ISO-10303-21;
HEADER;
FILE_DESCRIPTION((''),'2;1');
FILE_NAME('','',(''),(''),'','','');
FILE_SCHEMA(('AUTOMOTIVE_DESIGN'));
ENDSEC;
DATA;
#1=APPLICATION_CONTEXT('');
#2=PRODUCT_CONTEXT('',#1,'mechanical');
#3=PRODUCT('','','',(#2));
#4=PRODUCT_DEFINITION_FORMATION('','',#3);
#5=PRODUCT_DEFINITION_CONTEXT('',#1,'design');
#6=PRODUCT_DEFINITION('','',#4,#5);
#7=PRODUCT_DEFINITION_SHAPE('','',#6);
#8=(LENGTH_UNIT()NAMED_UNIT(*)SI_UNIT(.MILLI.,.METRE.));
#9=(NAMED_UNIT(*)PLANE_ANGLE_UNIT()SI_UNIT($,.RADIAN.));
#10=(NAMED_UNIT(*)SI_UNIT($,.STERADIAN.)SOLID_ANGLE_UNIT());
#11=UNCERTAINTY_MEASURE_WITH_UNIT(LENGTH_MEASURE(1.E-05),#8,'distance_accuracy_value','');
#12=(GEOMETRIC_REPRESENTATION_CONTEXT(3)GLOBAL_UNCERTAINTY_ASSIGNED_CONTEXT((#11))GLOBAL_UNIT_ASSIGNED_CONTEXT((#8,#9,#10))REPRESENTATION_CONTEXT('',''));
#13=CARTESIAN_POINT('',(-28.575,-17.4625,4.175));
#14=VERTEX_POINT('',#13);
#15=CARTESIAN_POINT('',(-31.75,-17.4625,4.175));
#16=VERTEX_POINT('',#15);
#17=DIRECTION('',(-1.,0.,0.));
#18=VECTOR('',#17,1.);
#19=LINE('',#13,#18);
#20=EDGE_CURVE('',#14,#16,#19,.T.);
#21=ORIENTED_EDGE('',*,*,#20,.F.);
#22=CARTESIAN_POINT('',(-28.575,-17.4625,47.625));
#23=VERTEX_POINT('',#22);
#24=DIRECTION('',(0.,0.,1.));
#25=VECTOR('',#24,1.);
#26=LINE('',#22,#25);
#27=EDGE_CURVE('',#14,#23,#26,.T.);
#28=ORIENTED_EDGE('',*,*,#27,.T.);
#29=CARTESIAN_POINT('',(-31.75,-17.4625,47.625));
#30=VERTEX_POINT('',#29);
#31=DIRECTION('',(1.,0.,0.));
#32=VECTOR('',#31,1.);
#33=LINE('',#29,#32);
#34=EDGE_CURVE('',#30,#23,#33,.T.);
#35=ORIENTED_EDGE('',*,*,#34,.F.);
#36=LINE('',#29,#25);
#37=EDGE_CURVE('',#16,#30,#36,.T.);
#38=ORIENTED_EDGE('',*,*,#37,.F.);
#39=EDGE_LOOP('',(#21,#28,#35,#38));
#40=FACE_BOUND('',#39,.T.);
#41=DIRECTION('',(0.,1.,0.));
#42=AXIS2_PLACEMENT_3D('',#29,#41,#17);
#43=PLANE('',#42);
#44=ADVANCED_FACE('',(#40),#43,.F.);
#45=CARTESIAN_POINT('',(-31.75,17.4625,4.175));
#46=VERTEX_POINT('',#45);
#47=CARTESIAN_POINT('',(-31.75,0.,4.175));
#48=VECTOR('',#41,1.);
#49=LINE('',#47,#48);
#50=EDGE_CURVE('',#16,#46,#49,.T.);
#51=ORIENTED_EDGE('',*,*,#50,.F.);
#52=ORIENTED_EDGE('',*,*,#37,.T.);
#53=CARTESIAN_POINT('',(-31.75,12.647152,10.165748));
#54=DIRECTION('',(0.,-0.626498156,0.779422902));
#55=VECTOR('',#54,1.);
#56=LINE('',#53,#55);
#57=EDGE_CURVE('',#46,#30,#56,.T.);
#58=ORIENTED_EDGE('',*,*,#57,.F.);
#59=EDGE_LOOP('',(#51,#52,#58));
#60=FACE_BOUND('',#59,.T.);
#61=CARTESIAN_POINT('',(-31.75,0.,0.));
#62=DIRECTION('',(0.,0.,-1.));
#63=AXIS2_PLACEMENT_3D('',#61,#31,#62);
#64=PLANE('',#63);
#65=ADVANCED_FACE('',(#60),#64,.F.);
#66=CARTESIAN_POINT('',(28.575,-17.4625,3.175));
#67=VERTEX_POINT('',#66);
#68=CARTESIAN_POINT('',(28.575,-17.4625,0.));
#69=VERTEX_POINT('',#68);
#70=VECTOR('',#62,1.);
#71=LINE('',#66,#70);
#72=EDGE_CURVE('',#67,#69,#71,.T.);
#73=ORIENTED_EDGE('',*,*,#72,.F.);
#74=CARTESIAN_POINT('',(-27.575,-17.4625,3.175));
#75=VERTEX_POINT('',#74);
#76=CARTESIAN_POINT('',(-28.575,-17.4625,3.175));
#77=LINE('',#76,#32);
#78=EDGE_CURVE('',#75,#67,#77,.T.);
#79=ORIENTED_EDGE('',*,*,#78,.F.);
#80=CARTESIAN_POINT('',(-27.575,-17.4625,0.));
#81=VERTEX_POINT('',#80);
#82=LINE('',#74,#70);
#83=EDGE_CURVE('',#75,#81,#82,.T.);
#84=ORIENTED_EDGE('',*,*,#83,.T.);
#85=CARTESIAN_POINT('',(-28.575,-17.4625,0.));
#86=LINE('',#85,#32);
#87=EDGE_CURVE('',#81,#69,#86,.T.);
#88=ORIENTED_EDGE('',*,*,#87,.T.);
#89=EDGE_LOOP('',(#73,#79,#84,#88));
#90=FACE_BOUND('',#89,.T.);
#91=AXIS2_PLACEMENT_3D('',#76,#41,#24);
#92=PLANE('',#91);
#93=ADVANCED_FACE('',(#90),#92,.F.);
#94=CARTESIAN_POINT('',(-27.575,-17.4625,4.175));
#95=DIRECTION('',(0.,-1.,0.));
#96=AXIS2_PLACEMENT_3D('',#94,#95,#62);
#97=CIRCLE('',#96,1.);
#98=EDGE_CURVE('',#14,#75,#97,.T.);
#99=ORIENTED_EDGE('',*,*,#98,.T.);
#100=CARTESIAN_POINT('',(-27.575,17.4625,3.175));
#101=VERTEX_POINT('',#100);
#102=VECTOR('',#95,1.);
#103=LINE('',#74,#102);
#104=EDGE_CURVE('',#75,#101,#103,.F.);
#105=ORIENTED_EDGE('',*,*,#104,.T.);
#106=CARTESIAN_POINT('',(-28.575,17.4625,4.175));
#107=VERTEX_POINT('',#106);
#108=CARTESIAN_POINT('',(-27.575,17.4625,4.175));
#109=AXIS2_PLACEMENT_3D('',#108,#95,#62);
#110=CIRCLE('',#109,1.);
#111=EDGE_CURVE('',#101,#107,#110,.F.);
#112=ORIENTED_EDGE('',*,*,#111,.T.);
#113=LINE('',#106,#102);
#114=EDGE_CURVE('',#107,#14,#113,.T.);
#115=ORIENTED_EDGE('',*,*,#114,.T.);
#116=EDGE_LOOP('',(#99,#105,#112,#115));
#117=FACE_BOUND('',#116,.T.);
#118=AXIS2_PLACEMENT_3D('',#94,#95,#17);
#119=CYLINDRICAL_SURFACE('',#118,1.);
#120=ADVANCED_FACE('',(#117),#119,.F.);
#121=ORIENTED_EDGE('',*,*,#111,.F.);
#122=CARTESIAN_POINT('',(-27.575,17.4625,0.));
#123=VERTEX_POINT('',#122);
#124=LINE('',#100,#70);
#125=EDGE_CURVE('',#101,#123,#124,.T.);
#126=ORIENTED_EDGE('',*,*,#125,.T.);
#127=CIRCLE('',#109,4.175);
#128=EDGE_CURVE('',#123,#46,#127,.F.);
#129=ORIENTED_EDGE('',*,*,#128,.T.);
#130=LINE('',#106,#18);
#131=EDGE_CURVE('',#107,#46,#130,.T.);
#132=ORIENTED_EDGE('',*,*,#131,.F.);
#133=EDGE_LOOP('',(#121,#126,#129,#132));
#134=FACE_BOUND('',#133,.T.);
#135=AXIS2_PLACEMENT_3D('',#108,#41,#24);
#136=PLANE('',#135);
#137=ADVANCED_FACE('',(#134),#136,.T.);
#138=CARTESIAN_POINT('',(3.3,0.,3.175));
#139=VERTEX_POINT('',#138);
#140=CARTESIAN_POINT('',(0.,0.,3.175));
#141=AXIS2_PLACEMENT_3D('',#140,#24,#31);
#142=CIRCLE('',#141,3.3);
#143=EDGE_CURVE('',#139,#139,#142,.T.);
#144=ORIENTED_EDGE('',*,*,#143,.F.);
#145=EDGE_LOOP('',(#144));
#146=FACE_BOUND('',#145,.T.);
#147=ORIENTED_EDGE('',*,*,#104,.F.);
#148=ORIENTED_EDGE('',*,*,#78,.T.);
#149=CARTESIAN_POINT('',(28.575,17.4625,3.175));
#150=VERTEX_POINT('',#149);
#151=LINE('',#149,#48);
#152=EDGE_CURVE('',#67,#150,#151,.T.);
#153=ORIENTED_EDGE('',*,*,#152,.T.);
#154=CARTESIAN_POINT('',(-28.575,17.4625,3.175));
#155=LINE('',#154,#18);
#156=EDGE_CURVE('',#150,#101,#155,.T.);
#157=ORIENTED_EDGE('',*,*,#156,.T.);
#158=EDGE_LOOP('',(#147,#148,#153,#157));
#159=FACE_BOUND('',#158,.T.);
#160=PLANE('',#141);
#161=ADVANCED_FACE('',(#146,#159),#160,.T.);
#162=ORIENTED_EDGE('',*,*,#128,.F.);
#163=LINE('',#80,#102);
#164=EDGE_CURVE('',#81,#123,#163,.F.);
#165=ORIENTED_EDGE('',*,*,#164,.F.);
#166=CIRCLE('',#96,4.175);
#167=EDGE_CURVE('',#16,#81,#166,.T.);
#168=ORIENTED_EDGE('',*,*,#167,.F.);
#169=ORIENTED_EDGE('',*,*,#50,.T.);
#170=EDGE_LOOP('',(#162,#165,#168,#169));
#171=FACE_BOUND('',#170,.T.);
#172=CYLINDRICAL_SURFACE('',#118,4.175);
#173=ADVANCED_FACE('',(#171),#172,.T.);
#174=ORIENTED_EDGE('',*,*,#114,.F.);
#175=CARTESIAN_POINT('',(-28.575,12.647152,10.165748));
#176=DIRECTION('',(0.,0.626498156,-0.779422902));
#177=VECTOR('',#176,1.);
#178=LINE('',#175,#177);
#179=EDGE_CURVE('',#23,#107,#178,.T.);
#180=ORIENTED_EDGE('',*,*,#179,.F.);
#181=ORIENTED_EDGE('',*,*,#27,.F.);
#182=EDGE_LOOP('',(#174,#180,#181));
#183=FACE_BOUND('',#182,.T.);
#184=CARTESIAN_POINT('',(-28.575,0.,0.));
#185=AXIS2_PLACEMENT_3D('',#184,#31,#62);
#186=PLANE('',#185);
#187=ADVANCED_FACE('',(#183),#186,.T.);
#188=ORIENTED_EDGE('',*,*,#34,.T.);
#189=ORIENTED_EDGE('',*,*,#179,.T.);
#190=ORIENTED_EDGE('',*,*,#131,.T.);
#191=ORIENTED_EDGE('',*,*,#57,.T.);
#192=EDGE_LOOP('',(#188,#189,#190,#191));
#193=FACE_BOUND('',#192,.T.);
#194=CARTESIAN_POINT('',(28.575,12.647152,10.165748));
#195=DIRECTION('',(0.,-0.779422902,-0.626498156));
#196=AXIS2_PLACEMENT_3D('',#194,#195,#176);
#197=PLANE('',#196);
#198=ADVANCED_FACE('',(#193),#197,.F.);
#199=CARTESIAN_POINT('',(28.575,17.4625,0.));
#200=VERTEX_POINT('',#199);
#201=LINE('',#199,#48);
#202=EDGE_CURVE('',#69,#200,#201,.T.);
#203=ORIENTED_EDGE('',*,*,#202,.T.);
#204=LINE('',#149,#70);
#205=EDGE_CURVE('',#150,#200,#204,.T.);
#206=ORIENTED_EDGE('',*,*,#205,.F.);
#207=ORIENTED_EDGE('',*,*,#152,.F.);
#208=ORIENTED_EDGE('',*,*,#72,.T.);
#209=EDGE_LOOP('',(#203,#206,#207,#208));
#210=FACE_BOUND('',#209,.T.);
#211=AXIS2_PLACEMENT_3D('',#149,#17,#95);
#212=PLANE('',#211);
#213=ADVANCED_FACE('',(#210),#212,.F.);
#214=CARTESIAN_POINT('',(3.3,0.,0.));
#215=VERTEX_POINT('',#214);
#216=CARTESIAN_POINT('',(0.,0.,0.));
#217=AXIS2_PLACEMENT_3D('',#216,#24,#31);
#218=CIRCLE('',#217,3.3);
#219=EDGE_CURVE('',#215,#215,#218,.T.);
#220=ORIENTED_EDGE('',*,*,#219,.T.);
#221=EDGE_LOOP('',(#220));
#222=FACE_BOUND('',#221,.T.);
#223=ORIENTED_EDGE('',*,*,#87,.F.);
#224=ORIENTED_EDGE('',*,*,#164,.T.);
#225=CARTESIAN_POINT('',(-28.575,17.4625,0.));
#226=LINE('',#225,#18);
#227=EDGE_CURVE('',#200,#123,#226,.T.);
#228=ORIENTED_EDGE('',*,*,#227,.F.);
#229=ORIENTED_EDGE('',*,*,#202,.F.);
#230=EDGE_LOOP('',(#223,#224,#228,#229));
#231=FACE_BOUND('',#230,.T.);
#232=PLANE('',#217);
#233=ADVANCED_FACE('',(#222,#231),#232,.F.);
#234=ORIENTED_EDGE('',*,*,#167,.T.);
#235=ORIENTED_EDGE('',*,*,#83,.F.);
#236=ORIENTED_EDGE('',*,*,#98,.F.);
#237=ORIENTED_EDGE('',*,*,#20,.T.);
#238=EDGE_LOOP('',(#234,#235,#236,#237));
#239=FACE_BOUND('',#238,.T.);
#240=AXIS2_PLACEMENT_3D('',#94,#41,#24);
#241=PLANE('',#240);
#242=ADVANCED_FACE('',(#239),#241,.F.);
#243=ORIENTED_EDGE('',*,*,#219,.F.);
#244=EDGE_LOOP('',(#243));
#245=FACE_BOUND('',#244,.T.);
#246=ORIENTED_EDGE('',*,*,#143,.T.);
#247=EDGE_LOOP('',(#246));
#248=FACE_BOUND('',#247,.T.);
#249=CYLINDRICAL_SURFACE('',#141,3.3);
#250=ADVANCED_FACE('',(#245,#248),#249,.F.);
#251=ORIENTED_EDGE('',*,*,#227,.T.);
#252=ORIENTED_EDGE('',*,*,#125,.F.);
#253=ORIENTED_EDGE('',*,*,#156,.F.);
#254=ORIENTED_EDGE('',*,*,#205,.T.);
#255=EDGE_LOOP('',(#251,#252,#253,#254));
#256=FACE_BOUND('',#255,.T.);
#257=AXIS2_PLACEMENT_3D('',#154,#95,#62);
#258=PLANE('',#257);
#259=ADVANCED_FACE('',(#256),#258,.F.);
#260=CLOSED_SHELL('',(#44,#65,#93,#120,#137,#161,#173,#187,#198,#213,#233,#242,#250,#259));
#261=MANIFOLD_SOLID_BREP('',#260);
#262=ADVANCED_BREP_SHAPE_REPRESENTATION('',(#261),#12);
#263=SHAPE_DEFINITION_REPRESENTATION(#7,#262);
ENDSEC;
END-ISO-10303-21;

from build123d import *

# Parameters (mm, degrees)
SKETCH2_W                    = 57.15
SKETCH2_H                    = 34.925
BASE_FLANGE1_DEPTH           = 3.175
M6_CLEARANCE_HOLE1_D         = 6.6
EDGE_FLANGE2_STRIP_W         = 14.7
EDGE_FLANGE2_STRIP_H         = 3.175
EDGE_FLANGE2_STRIP_CUT_DEPTH = 34.925
EDGE_FLANGE2_DEPTH           = 34.925
CUT_EXTRUDE2_DEPTH           = 79.817416579


# Sheet-metal steps are written as plain solids
with BuildPart() as part:
    # Sketch2 → Base-Flange1 (new body)
    with BuildSketch(Plane.XY):
        Rectangle(SKETCH2_W, SKETCH2_H)
    extrude(amount=BASE_FLANGE1_DEPTH)

    # M6 Clearance Hole1 (through all)
    with Locations(Plane.XY.offset(3.175)):
        with Locations((0, 0)):
            Hole(M6_CLEARANCE_HOLE1_D / 2)

    # Edge-Flange2 strip (across the edge) → Edge-Flange2 strip cut (cut)
    with BuildSketch(Plane(origin=(-28.575, 17.4625, 3.175), x_dir=(1, 0, 0), z_dir=(0, -1, 0))):
        with Locations((-6.35, -1.5875)):
            Rectangle(EDGE_FLANGE2_STRIP_W, EDGE_FLANGE2_STRIP_H)
    extrude(amount=EDGE_FLANGE2_STRIP_CUT_DEPTH, mode=Mode.SUBTRACT)

    # Edge-Flange2 section (across the edge) → Edge-Flange2 (add)
    with BuildSketch(Plane(origin=(-28.575, 17.4625, 3.175), x_dir=(1, 0, 0), z_dir=(0, -1, 0))):
        with BuildLine():
            Line((-3.175, 1), (-3.175, 44.45))
            Line((-3.175, 44.45), (0, 44.45))
            Line((0, 44.45), (0, 1))
            ThreePointArc((0, 1), (0.292893219, 0.292893219), (1, 0))
            Line((1, 0), (1, -3.175))
            ThreePointArc((1, -3.175), (-1.952170811, -1.952170811), (-3.175, 1))
        make_face()
    extrude(amount=EDGE_FLANGE2_DEPTH)

    # Sketch20 → Cut-Extrude2 (cut, through all)
    with BuildSketch(Plane.ZY.offset(31.75)):
        Polygon((4.175, 17.4625), (47.625, -17.4625), (47.625, 17.4625), align=None)
    extrude(amount=-CUT_EXTRUDE2_DEPTH, mode=Mode.SUBTRACT)


solid = part.part
